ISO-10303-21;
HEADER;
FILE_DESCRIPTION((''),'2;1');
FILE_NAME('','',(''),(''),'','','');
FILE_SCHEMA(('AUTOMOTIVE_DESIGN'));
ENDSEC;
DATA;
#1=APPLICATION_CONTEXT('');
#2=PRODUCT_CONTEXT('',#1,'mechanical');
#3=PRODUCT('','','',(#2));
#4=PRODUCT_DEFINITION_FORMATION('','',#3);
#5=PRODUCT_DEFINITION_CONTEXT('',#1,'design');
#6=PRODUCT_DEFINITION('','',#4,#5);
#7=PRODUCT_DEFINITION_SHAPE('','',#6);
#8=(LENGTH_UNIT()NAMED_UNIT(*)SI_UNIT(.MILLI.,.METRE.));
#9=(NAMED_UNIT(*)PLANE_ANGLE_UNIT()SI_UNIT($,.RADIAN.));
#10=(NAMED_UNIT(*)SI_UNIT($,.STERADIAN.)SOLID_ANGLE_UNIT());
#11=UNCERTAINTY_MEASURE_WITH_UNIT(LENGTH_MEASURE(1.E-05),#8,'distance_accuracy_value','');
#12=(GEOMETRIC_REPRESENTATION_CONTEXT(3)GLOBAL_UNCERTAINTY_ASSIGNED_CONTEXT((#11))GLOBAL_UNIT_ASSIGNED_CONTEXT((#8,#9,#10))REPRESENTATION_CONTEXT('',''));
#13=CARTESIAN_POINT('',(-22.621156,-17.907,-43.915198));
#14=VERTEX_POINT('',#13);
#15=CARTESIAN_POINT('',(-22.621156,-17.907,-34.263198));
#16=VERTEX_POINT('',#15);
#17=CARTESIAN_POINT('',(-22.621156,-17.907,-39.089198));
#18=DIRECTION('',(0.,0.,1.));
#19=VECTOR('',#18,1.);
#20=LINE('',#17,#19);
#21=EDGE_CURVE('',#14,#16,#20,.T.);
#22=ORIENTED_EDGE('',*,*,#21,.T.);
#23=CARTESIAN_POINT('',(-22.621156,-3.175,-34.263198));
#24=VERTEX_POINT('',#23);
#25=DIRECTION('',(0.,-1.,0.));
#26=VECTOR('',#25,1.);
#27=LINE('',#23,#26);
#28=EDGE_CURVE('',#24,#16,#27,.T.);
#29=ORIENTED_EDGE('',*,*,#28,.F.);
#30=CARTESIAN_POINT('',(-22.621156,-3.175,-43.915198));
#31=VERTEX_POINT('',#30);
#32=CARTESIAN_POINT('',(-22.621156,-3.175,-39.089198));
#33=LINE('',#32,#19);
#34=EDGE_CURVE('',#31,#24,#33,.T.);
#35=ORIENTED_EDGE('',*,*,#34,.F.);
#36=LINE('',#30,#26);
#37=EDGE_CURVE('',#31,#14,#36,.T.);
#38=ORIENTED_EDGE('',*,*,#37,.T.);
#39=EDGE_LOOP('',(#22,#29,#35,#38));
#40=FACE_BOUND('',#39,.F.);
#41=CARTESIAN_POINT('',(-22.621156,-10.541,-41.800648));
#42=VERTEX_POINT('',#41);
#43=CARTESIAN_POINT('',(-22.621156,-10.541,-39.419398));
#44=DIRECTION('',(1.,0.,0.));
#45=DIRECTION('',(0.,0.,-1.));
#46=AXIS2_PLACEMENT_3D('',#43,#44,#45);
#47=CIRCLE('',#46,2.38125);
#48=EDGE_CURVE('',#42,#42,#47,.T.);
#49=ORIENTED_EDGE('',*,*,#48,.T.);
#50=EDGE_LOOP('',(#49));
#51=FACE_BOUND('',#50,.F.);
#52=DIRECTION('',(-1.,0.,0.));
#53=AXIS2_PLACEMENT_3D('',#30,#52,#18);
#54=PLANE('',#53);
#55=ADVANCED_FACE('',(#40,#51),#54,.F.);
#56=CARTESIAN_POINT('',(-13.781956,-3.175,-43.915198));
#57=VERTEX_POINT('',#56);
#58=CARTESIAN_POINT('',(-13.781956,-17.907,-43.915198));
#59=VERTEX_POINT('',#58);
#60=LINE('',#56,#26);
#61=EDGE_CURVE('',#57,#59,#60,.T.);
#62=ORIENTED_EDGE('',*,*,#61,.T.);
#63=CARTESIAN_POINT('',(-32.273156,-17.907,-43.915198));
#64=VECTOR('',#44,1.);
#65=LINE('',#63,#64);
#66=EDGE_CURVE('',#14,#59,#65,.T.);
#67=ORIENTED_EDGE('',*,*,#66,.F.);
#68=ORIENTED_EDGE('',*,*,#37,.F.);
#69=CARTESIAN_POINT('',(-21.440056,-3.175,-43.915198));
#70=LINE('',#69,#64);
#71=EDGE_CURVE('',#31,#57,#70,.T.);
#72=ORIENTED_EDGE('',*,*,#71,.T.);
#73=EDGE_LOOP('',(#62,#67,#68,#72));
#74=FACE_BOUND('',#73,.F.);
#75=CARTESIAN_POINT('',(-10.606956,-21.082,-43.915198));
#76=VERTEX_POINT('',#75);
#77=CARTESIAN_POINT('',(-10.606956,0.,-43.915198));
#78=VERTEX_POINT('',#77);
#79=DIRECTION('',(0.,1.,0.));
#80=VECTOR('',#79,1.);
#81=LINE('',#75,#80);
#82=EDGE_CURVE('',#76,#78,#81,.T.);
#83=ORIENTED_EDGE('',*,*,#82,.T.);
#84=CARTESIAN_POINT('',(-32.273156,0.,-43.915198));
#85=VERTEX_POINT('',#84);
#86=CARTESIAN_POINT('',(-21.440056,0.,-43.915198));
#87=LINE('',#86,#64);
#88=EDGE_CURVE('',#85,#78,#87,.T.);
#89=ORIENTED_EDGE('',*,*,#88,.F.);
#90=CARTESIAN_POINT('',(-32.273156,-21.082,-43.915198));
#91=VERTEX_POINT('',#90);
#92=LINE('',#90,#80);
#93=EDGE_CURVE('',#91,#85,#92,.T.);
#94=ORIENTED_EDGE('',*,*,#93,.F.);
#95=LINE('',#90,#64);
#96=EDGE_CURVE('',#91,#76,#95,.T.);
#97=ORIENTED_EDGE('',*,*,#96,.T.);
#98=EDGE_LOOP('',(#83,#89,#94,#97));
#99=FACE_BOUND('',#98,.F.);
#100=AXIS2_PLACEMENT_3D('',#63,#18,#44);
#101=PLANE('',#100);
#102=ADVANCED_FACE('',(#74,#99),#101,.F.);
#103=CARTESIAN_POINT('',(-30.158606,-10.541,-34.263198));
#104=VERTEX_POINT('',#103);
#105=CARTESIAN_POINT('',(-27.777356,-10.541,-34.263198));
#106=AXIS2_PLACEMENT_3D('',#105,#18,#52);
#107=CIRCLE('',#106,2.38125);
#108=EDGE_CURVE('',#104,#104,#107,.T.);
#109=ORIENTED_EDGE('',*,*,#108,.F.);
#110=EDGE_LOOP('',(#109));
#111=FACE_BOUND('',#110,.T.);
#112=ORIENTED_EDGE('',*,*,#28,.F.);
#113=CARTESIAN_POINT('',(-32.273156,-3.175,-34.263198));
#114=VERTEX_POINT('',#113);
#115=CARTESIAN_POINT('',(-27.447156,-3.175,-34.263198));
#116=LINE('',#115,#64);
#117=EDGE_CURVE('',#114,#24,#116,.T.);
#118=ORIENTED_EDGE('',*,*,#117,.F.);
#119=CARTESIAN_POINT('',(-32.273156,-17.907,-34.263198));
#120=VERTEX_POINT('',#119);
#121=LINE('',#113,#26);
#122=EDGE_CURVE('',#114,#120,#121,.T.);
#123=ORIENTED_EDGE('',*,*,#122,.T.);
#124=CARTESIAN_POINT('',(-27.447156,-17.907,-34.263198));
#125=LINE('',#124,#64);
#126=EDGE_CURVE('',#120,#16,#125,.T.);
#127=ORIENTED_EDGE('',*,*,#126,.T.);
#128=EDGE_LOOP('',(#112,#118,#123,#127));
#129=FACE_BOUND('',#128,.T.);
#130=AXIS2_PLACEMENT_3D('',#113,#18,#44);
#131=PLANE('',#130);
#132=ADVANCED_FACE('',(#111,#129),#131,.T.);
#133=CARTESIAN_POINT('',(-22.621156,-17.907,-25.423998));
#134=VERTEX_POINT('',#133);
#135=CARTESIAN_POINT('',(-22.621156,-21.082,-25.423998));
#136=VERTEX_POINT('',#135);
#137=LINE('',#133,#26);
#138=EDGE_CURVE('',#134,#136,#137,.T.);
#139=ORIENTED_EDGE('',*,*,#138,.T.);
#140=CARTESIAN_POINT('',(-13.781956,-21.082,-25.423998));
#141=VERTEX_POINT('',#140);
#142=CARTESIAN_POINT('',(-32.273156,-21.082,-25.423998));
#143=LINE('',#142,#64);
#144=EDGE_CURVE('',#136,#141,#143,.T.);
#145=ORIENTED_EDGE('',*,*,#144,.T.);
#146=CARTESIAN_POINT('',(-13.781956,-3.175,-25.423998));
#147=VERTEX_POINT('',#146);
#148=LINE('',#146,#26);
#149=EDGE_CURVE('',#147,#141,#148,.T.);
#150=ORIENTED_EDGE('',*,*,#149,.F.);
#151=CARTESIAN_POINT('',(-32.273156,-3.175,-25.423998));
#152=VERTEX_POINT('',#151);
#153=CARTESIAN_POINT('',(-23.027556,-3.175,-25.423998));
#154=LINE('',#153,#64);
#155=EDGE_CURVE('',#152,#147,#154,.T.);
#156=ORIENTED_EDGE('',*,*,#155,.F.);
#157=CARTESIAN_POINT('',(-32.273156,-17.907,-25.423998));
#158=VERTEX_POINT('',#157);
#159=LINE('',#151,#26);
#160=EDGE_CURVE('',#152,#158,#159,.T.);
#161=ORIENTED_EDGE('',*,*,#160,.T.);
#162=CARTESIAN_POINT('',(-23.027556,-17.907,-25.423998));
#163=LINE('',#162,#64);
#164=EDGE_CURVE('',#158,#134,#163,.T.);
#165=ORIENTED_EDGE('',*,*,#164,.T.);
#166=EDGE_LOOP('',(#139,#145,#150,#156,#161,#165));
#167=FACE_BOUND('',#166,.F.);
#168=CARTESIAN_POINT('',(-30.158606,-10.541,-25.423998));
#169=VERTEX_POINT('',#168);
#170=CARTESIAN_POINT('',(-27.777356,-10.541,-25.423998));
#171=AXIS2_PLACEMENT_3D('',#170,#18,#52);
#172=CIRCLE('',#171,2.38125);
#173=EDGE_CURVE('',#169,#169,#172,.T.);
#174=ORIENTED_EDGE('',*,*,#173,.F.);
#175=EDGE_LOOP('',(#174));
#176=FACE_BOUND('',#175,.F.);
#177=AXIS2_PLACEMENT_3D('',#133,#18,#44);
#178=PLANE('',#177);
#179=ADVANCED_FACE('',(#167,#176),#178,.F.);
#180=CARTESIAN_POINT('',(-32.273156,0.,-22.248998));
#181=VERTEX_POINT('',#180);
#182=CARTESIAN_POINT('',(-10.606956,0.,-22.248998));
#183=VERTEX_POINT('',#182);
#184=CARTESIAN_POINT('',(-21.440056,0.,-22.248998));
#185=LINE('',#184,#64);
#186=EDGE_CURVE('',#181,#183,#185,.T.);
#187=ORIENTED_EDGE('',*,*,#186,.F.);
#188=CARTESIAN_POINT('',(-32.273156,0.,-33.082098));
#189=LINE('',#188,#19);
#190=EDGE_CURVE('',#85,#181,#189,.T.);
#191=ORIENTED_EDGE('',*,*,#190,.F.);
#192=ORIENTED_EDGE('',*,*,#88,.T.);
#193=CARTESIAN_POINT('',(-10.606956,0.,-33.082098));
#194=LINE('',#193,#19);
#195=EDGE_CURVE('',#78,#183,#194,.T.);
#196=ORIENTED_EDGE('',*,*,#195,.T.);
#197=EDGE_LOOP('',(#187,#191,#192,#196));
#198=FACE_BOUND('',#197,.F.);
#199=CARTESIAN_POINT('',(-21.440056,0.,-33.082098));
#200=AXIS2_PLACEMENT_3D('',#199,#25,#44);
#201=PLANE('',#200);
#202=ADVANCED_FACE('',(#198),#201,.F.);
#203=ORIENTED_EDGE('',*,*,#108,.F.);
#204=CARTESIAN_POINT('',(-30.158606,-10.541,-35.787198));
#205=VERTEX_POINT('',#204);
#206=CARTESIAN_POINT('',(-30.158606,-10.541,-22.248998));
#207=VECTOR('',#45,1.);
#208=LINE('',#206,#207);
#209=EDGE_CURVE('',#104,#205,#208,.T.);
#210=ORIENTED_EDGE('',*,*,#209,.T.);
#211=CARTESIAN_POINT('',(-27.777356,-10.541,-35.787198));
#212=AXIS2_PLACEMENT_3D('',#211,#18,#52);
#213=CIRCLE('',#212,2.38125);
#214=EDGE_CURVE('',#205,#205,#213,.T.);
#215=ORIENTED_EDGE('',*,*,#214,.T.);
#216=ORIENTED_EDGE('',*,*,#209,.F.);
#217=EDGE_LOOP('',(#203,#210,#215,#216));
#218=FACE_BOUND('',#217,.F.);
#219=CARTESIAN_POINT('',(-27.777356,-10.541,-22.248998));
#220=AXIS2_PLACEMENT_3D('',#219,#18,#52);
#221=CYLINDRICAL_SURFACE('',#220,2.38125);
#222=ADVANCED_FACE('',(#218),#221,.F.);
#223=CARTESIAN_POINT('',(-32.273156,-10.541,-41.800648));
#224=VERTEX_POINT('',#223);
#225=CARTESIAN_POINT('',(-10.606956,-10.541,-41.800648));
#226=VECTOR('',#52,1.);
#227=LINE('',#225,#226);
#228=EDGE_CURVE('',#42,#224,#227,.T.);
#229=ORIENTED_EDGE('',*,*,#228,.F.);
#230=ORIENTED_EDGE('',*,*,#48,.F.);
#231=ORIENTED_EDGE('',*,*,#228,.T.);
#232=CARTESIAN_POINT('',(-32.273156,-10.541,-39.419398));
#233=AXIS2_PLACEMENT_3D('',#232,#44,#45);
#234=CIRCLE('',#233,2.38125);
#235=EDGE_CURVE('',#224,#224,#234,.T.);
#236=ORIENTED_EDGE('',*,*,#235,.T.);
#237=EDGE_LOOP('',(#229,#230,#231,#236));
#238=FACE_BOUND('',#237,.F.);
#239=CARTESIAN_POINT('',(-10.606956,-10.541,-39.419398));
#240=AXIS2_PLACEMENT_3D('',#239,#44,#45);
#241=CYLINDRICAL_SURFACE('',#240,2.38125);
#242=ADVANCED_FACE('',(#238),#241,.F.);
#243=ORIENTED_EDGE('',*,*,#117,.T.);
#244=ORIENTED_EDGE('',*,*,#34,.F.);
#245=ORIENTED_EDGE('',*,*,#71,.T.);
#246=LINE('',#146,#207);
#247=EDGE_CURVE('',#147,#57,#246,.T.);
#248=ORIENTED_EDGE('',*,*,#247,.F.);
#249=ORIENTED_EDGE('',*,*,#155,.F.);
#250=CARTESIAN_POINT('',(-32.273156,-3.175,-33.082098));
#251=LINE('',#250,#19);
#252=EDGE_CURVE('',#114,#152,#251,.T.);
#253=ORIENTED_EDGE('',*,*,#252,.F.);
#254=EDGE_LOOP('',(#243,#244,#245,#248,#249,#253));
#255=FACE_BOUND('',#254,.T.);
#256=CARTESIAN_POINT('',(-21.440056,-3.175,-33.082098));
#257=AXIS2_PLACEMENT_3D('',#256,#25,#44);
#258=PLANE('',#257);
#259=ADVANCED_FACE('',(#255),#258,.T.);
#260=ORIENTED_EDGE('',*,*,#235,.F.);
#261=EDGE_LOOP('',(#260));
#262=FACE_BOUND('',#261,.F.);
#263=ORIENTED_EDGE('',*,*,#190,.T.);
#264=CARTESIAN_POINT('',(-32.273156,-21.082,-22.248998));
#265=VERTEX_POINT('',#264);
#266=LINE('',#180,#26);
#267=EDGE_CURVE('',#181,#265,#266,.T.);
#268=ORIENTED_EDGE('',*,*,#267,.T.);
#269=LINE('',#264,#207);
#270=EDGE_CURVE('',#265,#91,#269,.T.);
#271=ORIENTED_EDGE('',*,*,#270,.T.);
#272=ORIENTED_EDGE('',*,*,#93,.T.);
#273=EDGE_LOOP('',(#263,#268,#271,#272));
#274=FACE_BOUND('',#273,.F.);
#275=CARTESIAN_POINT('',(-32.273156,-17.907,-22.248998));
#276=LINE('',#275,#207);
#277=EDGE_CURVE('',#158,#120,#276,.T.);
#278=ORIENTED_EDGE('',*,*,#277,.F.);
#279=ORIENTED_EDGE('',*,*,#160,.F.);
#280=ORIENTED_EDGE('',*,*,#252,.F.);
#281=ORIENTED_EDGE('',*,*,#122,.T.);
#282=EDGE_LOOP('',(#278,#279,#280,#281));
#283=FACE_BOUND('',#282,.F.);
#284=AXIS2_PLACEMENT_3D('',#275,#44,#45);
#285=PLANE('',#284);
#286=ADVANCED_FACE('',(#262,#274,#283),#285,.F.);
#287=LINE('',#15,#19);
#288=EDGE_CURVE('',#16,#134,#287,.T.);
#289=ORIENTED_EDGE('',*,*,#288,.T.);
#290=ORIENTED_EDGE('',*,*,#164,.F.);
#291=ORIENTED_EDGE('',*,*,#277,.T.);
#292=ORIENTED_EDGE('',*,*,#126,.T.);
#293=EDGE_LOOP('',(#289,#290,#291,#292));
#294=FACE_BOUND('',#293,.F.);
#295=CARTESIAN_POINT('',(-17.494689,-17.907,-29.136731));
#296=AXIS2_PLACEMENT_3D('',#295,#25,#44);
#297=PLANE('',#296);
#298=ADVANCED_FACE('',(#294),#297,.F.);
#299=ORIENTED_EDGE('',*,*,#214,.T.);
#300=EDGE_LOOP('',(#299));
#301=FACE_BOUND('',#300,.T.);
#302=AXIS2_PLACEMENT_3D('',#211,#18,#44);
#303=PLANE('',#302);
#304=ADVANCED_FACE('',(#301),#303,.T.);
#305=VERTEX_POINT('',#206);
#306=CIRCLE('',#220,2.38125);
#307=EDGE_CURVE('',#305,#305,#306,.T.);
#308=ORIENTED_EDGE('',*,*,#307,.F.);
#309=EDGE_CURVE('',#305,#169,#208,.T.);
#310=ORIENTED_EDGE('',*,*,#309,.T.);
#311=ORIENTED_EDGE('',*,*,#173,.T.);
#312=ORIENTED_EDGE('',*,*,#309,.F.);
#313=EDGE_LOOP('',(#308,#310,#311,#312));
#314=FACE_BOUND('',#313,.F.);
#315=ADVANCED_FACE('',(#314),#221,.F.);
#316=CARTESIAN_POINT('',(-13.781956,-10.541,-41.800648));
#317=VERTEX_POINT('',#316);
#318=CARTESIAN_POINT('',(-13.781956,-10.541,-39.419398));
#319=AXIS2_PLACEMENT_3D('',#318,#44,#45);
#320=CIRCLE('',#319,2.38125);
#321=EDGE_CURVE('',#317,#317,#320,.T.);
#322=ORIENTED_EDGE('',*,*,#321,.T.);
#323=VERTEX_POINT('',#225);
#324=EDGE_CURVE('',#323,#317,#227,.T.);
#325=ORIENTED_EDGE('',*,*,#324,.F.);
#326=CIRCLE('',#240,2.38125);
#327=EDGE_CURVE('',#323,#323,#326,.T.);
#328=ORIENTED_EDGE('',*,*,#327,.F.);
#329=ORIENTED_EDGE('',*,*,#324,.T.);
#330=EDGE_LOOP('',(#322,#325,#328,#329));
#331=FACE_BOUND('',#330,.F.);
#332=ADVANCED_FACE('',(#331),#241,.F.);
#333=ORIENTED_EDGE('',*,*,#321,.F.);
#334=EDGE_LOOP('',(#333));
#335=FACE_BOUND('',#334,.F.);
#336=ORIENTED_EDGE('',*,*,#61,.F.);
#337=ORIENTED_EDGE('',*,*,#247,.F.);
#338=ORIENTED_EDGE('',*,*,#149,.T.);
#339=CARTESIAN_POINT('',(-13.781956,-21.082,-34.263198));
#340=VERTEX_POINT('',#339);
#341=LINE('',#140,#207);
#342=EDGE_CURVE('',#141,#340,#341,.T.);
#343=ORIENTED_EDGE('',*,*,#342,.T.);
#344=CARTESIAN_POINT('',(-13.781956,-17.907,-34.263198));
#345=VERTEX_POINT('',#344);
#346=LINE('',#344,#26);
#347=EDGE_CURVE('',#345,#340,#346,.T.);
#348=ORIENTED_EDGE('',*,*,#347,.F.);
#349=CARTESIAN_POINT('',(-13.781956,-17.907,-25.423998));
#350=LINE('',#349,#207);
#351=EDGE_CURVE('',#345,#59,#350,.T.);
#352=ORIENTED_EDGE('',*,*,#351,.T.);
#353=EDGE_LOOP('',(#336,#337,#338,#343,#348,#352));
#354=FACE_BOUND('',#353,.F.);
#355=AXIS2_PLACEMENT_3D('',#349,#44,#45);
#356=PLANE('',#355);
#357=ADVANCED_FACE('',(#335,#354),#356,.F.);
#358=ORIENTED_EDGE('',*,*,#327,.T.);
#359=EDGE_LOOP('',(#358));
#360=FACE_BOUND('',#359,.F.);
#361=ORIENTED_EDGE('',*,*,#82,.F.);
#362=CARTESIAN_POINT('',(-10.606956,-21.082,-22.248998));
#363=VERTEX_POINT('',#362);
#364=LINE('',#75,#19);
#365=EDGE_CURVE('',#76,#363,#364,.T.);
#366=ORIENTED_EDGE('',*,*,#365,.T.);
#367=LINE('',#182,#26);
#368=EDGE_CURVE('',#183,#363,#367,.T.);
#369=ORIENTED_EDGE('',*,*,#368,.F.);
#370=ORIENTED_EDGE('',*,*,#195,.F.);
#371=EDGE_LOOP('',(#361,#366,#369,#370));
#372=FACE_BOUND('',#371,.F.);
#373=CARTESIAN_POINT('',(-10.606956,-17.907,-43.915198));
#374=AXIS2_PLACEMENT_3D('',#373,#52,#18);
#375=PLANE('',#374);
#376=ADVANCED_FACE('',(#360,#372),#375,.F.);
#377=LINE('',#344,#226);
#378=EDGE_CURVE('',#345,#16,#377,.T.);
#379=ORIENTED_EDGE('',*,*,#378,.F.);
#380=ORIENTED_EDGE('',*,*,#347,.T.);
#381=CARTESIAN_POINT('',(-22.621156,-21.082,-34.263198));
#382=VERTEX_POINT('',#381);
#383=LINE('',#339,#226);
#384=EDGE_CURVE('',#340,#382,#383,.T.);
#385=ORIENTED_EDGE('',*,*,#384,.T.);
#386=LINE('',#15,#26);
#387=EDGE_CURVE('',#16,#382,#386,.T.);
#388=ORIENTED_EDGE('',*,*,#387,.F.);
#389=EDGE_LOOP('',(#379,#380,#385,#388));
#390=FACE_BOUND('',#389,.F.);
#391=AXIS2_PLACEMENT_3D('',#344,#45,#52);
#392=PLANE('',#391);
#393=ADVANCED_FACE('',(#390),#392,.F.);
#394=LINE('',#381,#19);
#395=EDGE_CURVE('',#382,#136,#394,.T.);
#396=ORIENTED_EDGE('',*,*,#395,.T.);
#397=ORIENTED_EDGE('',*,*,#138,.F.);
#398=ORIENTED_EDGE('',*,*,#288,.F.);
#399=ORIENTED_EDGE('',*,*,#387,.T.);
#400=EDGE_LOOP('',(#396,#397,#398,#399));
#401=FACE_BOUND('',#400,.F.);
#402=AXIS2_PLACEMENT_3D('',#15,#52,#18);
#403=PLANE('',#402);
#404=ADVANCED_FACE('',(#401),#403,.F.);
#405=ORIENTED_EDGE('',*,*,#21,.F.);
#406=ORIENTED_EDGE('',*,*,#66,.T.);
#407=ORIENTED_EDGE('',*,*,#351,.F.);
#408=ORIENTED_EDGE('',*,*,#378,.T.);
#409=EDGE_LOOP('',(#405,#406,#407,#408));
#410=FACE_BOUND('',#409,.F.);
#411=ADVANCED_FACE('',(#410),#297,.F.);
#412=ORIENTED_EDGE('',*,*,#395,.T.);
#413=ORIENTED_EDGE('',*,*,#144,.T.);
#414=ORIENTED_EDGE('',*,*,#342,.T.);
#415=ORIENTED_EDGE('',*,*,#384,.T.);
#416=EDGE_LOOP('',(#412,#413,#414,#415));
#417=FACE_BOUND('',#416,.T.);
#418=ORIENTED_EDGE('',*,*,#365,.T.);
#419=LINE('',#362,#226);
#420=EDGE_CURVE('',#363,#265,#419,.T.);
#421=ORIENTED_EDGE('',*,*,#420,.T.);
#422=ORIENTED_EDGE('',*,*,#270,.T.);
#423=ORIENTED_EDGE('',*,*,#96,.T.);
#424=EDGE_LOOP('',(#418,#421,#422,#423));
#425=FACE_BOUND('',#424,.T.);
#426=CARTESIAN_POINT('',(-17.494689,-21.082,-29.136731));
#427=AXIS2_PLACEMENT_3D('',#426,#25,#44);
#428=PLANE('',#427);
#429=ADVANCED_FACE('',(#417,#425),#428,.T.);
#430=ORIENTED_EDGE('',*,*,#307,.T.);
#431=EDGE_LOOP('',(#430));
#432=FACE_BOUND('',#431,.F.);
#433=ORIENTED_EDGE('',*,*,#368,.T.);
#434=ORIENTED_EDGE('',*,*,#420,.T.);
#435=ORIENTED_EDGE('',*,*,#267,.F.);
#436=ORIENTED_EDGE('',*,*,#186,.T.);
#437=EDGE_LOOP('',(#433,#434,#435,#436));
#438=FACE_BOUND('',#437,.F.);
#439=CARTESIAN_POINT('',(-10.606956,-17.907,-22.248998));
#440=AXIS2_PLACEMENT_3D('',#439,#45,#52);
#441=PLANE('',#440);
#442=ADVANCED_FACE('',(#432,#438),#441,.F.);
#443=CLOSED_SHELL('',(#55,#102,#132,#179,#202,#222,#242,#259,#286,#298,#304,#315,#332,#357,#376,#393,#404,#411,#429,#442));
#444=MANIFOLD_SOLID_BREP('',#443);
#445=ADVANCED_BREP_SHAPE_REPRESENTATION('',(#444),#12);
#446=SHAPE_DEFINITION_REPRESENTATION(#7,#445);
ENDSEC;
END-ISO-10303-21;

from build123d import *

# Parameters (mm, degrees)
F0_W     = 21.6662
F0_H     = 21.6662
F1_DEPTH = 3.175
F2_W     = 18.4912
F2_H     = 3.175
F2_W_2   = 9.652
F2_H_2   = 9.652
F3_DEPTH = 14.732
F5_DEPTH = 13.5382
F7_DEPTH = 25.4
F9_DEPTH = 3.175


# Not quite as in the source:
# - a length typed as a fraction of an inch, garbled in the dataset ("3 / 203.2 mm" for 3/8 in), is restored


with BuildPart() as f1:
    # F0 (on Front) → F1 (new body)
    with BuildSketch(Plane.XZ):
        with Locations((-21.4400560975, -33.0820980474)):
            Rectangle(F0_W, F0_H)
    extrude(amount=F1_DEPTH)

    # F2 (on face) → F3 (join)
    with BuildSketch(Plane.XZ.offset(3.175)):
        with Locations((-23.0275560975, -23.8364980474)):
            Rectangle(F2_W, F2_H)
        Polygon((-13.7819560975, -22.2489980474), (-13.7819560975, -25.4239980474), (-13.7819560975, -43.9151980474), (-10.6069560975, -43.9151980474), (-10.6069560975, -22.2489980474), align=None)
        with Locations((-27.4471560975, -39.0891980474)):
            Rectangle(F2_W_2, F2_H_2)
    extrude(amount=F3_DEPTH)

    # F4 (on face) → F5 (cut)
    with BuildSketch(Plane.XY.offset(-22.2489980474)):
        with BuildLine():
            ThreePointArc((-25.3961060975, -10.541), (-27.7773560975, -8.15975), (-30.1586060975, -10.541))
            ThreePointArc((-30.1586060975, -10.541), (-27.7773560975, -12.92225), (-25.3961060975, -10.541))
        make_face()
    extrude(amount=-F5_DEPTH, mode=Mode.SUBTRACT)

    # F6 (on face) → F7 (cut)
    with BuildSketch(Plane.YZ.offset(-10.6069560975)):
        with BuildLine():
            ThreePointArc((-8.15975, -39.4193980474), (-12.2247980227, -37.7356000247), (-10.541, -41.8006480474))
            ThreePointArc((-10.541, -41.8006480474), (-8.8572019773, -41.1031960701), (-8.15975, -39.4193980474))
        make_face()
    extrude(amount=-F7_DEPTH, mode=Mode.SUBTRACT)

    # F8 (on face) → F9 (join)
    with BuildSketch(Plane.XZ.offset(17.907)):
        Polygon((-10.6069560975, -43.9151980474), (-10.6069560975, -22.2489980474), (-32.2731560975, -22.2489980474), (-32.2731560975, -25.4239980474), (-22.6211560975, -25.4239980474), (-13.7819560975, -25.4239980474), (-13.7819560975, -34.2631980474), (-13.7819560975, -43.9151980474), align=None)
        Polygon((-22.6211560975, -25.4239980474), (-32.2731560975, -25.4239980474), (-32.2731560975, -43.9151980474), (-13.7819560975, -43.9151980474), (-13.7819560975, -34.2631980474), (-22.6211560975, -34.2631980474), align=None)
    extrude(amount=F9_DEPTH)


solid = f1.part
